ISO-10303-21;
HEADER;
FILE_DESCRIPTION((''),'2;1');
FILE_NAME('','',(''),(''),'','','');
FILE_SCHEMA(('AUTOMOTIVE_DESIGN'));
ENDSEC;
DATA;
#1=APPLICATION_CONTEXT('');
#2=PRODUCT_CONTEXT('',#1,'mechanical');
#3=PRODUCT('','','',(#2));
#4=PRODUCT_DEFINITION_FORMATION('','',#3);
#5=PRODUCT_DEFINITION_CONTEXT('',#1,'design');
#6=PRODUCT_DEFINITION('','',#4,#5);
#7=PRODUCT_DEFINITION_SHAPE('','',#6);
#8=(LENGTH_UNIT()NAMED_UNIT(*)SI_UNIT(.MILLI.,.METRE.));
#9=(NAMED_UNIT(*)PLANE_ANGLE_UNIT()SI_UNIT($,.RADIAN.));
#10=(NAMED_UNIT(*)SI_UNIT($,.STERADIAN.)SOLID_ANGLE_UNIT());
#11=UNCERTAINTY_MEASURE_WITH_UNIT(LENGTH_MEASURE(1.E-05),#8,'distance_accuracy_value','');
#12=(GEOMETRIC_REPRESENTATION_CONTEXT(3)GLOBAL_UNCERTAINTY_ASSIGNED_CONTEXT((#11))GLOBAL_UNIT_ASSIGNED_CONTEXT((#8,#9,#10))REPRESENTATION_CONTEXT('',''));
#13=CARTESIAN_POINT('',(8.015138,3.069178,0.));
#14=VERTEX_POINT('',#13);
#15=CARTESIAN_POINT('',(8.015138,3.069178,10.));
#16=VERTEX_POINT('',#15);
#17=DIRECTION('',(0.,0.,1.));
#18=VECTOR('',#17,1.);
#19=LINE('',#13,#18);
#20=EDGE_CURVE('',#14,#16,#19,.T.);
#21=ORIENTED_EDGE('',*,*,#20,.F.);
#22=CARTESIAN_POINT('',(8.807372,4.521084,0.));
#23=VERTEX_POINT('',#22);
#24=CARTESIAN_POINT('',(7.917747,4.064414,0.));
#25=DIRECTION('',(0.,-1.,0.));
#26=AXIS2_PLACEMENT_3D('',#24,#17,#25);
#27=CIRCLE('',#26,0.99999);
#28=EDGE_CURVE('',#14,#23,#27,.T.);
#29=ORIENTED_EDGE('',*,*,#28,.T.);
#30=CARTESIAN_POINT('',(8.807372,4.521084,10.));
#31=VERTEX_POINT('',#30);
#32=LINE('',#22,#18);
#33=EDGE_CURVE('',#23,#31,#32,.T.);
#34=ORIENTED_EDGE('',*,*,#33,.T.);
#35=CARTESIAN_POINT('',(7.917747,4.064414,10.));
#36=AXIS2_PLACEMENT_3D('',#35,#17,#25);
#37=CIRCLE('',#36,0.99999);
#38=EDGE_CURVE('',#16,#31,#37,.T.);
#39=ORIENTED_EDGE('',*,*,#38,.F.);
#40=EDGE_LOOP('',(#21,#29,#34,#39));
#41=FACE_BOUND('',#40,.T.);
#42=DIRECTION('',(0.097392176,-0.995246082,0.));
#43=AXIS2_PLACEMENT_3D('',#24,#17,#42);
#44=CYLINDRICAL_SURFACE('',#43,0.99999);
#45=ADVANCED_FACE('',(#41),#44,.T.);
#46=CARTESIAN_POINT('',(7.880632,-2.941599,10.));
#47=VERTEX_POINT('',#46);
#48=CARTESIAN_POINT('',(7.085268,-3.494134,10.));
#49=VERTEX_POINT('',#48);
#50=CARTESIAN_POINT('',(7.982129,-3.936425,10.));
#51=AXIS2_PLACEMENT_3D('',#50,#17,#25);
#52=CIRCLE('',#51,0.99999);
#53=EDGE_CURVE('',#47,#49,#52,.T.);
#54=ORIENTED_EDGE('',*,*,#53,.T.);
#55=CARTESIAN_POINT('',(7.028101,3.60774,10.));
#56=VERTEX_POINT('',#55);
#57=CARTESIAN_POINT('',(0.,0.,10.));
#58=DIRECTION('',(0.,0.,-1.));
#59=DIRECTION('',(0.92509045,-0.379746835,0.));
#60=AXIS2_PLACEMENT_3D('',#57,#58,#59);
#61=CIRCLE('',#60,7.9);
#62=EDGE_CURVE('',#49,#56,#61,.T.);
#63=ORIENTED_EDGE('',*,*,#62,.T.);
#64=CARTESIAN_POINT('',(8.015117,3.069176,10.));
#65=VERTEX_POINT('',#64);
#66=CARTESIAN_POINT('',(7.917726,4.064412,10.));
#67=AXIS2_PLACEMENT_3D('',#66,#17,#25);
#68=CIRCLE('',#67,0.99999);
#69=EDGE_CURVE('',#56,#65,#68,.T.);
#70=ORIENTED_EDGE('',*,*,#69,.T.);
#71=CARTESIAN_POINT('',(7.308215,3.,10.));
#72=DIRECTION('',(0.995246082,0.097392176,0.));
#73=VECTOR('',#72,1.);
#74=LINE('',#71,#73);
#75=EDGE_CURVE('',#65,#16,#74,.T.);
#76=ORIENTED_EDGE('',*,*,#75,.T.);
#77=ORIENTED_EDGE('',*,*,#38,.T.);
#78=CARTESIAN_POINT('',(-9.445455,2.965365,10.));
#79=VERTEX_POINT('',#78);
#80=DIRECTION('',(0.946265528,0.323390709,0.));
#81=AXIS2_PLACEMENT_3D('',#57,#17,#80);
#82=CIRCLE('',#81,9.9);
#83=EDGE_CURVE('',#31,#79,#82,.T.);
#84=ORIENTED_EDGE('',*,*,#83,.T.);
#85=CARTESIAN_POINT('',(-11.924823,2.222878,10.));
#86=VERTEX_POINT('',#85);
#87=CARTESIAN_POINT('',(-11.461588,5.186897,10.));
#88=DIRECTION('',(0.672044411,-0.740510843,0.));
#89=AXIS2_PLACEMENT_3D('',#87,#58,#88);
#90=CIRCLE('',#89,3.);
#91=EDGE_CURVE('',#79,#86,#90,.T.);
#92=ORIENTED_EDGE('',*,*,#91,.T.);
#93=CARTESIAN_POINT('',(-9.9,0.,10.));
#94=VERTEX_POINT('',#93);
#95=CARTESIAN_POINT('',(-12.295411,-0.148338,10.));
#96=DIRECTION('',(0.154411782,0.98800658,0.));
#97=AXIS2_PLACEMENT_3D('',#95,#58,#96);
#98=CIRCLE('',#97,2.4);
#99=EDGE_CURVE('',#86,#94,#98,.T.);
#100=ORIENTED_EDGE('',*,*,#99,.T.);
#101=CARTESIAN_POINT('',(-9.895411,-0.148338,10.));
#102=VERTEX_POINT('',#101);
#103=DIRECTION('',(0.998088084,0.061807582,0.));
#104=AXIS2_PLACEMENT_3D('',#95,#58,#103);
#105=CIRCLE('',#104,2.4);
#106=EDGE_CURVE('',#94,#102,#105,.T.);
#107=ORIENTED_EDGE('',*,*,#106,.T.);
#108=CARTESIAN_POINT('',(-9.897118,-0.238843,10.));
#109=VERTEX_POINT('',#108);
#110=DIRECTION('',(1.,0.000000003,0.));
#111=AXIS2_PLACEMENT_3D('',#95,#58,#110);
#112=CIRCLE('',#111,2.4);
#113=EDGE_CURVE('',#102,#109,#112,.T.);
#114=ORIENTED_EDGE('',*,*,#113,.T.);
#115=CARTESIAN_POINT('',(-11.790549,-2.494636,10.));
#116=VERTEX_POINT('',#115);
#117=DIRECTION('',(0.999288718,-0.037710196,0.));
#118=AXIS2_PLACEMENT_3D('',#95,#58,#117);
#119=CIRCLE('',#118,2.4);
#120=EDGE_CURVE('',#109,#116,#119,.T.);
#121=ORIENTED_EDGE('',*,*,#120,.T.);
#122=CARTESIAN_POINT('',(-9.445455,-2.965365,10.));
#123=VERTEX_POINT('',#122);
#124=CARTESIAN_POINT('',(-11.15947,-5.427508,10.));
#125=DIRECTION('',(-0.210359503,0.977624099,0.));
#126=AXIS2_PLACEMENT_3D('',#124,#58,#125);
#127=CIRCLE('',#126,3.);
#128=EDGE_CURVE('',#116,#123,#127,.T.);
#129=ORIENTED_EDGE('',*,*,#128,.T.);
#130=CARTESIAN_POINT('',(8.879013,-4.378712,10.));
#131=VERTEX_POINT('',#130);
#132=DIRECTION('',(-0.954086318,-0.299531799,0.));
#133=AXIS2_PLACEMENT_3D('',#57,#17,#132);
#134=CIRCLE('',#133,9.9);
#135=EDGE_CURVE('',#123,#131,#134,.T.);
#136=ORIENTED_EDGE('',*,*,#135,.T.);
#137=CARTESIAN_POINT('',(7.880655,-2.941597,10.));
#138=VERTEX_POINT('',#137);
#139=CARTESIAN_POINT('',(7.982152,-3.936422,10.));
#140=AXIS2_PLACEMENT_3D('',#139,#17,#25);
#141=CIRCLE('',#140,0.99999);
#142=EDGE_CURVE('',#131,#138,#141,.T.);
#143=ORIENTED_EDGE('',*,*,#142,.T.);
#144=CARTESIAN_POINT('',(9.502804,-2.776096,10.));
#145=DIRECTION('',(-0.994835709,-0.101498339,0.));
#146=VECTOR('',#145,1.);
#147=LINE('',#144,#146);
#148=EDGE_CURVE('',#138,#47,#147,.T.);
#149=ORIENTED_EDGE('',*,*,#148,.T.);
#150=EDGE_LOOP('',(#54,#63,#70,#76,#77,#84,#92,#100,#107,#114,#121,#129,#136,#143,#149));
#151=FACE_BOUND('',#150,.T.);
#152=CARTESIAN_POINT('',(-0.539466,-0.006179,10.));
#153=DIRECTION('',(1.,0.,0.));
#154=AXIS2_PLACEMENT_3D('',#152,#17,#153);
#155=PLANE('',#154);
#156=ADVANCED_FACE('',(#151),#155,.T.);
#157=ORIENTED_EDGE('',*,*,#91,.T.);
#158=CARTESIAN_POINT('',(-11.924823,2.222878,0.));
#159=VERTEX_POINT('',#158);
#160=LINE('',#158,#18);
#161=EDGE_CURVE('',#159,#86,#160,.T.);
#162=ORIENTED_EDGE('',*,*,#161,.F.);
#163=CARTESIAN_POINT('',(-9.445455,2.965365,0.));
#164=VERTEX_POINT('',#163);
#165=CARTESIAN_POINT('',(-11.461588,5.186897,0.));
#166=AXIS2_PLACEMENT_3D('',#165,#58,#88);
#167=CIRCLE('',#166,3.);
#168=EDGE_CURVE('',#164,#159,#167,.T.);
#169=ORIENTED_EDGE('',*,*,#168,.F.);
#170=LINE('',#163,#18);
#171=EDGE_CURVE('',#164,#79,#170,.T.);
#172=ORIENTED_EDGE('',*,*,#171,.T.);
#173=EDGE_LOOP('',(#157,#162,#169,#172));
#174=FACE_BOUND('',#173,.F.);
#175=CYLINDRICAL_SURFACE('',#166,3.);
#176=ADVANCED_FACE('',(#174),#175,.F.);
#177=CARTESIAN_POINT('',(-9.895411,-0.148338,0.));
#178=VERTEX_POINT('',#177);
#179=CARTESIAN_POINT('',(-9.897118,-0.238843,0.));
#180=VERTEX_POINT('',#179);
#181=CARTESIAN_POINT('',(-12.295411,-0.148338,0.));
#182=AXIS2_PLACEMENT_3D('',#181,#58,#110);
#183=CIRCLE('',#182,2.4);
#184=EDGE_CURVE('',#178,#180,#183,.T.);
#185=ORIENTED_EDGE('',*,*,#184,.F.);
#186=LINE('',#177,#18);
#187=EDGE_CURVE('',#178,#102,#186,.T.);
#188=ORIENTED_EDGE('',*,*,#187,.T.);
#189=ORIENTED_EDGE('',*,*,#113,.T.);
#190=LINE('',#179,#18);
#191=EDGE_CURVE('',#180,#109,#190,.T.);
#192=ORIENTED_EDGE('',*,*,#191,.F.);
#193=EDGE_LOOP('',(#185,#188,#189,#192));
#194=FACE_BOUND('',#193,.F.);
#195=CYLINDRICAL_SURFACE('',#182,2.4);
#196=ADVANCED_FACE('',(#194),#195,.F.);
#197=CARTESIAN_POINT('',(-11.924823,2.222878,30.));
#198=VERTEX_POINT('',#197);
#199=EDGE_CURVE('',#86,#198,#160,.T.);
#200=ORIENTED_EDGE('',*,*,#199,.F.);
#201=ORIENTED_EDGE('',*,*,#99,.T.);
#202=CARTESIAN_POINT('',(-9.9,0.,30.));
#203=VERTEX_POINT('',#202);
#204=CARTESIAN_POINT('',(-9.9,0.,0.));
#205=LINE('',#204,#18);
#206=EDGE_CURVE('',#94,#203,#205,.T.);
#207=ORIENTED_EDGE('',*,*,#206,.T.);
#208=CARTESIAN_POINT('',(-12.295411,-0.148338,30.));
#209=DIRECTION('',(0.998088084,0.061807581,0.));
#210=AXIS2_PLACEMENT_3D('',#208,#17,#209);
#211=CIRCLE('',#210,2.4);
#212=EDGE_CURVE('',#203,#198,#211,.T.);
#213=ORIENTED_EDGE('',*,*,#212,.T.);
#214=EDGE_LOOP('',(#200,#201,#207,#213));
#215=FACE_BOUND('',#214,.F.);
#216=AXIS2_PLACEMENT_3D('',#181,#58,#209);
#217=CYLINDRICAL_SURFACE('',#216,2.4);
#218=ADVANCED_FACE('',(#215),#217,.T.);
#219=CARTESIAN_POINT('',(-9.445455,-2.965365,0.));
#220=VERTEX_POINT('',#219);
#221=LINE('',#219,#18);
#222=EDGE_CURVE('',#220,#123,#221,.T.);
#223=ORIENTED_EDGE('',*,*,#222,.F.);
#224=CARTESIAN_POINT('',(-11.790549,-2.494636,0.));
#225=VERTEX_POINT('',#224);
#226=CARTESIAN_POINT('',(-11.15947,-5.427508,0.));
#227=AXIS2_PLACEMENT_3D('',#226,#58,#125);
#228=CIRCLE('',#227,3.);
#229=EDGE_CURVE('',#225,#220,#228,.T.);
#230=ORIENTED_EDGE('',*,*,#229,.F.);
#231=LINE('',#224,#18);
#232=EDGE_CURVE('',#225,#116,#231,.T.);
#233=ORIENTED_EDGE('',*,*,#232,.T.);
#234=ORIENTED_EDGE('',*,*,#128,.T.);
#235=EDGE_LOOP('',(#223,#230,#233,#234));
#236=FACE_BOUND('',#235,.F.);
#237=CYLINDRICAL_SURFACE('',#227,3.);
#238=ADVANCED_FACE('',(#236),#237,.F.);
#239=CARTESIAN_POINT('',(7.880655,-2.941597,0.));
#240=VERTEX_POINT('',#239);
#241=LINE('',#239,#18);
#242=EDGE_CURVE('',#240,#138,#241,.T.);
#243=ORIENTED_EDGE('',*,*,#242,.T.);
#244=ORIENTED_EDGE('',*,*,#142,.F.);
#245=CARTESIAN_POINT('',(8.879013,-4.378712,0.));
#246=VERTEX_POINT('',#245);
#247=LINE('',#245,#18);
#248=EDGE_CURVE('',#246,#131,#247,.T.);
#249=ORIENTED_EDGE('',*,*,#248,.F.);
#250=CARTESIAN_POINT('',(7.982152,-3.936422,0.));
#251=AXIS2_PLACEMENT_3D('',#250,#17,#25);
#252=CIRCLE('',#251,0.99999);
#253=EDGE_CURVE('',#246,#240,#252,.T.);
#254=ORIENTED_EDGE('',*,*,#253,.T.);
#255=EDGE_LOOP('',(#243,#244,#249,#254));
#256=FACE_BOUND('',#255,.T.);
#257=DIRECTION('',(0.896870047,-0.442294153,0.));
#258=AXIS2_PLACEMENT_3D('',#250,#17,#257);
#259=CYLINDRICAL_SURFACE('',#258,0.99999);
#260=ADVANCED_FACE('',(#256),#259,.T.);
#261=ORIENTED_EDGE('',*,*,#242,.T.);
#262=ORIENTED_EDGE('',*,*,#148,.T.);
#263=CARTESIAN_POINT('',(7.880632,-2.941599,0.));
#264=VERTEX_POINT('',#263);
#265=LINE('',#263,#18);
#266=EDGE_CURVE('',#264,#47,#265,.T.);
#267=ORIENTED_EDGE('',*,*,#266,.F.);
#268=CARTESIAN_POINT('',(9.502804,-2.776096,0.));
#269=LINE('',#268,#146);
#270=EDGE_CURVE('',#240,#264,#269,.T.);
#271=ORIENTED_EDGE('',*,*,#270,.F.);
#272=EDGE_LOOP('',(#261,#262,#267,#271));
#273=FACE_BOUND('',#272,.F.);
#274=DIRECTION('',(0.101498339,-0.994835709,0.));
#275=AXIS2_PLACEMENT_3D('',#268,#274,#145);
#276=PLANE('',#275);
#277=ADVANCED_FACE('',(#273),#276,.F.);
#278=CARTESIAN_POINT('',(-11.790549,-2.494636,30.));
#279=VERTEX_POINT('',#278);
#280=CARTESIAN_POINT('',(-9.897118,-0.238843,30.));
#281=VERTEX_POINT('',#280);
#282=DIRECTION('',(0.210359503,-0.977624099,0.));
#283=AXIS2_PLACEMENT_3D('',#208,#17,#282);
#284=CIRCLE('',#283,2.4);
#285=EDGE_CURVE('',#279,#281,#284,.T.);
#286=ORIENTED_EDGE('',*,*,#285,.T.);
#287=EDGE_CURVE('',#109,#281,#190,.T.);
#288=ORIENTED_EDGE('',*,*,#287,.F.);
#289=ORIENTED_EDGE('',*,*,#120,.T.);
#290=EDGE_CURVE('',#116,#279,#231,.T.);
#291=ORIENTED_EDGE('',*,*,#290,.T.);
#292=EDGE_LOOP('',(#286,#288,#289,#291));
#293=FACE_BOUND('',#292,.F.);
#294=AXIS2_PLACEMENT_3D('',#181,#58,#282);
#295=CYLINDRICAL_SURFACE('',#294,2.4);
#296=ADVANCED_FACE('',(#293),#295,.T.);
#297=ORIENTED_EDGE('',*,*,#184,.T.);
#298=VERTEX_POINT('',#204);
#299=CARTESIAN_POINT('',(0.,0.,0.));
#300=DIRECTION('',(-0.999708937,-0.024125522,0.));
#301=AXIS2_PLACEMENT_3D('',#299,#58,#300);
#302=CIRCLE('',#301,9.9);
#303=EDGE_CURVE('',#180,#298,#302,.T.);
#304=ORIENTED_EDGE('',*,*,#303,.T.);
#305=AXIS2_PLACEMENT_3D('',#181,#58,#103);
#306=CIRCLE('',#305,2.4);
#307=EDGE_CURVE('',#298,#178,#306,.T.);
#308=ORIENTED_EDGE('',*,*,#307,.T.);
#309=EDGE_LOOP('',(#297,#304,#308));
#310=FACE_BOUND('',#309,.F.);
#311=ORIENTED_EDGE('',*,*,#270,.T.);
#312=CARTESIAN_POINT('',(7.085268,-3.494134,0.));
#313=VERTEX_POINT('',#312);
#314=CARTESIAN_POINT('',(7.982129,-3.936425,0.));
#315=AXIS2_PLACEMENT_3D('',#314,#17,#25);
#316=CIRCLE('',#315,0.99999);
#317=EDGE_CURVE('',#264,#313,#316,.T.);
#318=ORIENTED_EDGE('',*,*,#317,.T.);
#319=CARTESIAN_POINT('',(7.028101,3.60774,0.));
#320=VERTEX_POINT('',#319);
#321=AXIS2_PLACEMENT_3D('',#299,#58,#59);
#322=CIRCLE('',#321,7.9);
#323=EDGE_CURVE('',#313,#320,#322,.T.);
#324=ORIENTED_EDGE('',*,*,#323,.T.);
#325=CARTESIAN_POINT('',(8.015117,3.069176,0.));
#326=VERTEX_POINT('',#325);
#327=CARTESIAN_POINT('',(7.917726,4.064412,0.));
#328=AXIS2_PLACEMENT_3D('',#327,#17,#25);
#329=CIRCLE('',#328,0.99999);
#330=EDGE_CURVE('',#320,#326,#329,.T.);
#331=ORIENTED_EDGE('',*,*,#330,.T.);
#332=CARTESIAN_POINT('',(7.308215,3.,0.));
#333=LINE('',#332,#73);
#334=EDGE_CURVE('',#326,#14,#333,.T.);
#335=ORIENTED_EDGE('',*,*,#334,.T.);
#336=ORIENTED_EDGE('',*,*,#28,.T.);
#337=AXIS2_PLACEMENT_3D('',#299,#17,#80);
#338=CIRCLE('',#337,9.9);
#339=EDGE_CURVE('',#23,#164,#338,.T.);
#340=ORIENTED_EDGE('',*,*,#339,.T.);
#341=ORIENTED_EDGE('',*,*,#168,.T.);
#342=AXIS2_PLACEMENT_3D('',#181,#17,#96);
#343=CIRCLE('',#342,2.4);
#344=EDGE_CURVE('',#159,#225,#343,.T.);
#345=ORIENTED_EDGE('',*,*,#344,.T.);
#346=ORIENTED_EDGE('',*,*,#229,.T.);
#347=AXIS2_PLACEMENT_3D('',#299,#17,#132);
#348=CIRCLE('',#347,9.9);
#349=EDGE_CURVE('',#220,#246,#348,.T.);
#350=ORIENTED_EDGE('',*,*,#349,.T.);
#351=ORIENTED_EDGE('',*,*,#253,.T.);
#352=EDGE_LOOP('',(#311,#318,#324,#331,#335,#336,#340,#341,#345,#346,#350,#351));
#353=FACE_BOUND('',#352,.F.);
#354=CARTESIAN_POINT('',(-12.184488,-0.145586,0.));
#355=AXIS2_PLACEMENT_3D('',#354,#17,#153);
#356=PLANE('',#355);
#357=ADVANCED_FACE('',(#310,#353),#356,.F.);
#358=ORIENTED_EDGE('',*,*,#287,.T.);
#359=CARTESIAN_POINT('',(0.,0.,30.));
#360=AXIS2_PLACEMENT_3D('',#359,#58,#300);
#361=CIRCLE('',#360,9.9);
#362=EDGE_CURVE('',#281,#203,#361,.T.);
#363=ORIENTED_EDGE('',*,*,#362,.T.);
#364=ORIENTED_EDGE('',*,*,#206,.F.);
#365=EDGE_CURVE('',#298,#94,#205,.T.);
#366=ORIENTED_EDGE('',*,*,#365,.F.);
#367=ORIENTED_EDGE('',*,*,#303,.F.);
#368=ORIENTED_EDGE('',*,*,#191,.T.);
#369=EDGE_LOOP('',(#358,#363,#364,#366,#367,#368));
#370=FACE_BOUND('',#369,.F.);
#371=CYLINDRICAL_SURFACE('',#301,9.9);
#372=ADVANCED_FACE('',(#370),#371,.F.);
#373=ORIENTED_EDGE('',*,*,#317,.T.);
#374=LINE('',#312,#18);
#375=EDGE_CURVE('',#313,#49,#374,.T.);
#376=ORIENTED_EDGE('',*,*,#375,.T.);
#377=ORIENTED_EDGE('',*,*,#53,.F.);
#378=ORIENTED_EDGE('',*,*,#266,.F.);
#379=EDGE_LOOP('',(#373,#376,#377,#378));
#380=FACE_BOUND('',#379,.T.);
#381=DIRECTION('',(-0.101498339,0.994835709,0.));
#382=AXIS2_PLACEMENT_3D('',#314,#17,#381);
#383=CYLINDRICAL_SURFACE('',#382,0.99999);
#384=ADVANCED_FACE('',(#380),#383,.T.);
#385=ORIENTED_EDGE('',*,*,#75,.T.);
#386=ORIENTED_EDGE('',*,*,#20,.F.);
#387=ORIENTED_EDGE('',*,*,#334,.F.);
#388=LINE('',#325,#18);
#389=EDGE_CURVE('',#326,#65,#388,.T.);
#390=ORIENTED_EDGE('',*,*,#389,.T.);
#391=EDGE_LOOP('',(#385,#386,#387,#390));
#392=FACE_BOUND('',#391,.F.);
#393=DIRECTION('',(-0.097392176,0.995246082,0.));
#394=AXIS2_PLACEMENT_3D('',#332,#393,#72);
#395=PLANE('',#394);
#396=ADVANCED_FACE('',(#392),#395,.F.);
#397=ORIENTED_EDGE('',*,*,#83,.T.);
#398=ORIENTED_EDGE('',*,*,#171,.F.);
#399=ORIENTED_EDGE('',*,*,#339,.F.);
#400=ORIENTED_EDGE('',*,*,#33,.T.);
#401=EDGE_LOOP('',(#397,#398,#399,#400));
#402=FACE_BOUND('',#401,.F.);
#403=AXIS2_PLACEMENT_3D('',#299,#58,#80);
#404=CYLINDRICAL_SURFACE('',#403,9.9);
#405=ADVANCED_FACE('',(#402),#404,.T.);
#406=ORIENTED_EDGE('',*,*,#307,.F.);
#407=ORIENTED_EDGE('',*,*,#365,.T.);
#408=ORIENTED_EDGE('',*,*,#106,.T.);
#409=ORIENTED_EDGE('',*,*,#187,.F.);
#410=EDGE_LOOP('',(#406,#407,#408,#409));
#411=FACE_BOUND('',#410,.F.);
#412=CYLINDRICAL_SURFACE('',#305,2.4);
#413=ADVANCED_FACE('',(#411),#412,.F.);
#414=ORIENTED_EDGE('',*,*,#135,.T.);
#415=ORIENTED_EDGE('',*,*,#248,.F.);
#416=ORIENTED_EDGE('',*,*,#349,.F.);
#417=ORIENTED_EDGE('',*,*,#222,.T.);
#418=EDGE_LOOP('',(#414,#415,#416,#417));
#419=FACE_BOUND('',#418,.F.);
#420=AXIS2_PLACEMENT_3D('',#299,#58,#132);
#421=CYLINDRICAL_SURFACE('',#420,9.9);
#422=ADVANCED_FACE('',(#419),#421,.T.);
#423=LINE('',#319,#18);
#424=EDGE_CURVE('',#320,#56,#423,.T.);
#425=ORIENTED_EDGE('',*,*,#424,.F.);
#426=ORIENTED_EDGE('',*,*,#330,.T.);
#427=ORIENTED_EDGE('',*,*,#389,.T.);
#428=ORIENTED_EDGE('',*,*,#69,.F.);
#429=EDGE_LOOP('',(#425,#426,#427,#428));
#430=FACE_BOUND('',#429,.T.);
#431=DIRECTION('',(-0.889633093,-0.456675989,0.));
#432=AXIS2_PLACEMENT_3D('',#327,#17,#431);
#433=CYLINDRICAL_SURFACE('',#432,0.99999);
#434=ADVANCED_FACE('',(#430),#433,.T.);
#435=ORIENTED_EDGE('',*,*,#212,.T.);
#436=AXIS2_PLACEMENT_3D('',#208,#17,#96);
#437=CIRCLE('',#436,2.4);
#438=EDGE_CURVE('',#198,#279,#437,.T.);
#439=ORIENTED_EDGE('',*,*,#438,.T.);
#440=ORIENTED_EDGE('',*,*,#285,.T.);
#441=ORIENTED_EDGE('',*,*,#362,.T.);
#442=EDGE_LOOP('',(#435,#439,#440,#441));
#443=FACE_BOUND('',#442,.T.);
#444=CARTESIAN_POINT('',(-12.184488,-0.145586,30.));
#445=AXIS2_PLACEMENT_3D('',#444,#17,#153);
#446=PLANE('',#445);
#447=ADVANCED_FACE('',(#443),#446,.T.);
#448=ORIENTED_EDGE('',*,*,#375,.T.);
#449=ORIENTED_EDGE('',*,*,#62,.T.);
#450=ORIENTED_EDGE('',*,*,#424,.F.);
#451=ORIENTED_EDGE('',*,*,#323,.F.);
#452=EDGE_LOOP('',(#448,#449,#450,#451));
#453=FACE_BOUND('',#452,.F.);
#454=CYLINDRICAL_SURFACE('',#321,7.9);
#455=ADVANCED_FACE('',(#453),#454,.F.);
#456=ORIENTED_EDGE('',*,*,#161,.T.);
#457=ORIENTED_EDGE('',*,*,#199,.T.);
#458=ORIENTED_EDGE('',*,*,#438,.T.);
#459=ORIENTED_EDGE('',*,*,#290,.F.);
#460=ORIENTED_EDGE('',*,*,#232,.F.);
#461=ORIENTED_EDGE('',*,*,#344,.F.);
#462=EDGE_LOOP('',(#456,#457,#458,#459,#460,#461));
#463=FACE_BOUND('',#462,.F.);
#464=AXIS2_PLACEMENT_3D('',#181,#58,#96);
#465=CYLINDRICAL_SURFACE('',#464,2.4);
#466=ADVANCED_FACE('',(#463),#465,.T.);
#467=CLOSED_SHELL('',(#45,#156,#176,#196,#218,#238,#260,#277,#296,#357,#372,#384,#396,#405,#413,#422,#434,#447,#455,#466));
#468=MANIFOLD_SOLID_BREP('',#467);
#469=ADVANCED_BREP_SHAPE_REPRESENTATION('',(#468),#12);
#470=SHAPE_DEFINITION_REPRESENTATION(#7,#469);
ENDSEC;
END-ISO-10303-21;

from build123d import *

# Parameters (mm, degrees)
F1_DEPTH = 10
F2_DEPTH = 30
F3_R     = 0.99999


# Not quite as in the source:
# - a fillet or chamfer is up to 0.001 mm smaller than in the source, because OpenCascade refuses the exact size


with BuildPart() as f1:
    # F0 (on Top) → F1 (new body)
    with BuildSketch(Plane.XY):
        with BuildLine():
            ThreePointArc((-9.4454545455, 2.9653648055), (-9.7857038582, 1.5), (-9.9, 0))
            ThreePointArc((-9.9, 0), (-9.896558825, -0.0741336209), (-9.895411401, -0.1483381952))
            ThreePointArc((-9.895411401, -0.1483381952), (-9.8958382083, -0.193598479), (-9.8971184787, -0.238842665))
            ThreePointArc((-9.8971184787, -0.238842665), (-9.7668963107, -1.6179420433), (-9.4454545455, -2.9653648055))
            ThreePointArc((-9.4454545455, -2.9653648055), (0.0988831148, -9.8995061558), (9.5028042321, -2.7760964907))
            Line((9.5028042321, -2.7760964907), (7.3082145562, -3))
            ThreePointArc((7.3082145562, -3), (-7.9, 0), (7.3082145562, 3))
            Line((7.3082145562, 3), (9.3680287257, 3.2015680213))
            ThreePointArc((9.3680287257, 3.2015680213), (-0.1242846699, 9.8992198339), (-9.4454545455, 2.9653648055))
        make_face()
        with BuildLine():
            ThreePointArc((-9.4454545455, 2.9653648055), (-10.6009515165, 2.3129966374), (-11.9248231248, 2.2228775962))
            ThreePointArc((-11.9248231248, 2.2228775962), (-10.5211552877, 1.4678348291), (-9.9, 0))
            ThreePointArc((-9.9, 0), (-9.7857038582, 1.5), (-9.4454545455, 2.9653648055))
        make_face()
        with BuildLine():
            ThreePointArc((-9.8971184787, -0.238842665), (-10.4571434039, -1.6913128454), (-11.7905485927, -2.4946360333))
            ThreePointArc((-11.7905485927, -2.4946360333), (-10.5690595937, -2.4861794722), (-9.4454545455, -2.9653648055))
            ThreePointArc((-9.4454545455, -2.9653648055), (-9.7668963107, -1.6179420433), (-9.8971184787, -0.238842665))
        make_face()
    extrude(amount=F1_DEPTH)

    # F0 (on Top) → F2 (join)
    with BuildSketch(Plane.XY):
        with BuildLine():
            ThreePointArc((-9.9, 0), (-10.5211552877, 1.4678348291), (-11.9248231248, 2.2228775962))
            ThreePointArc((-11.9248231248, 2.2228775962), (-14.6944398213, -0.2166217115), (-11.7905485927, -2.4946360333))
            ThreePointArc((-11.7905485927, -2.4946360333), (-10.4571434039, -1.6913128454), (-9.8971184787, -0.238842665))
            ThreePointArc((-9.8971184787, -0.238842665), (-9.8992795935, -0.1194300232), (-9.9, 0))
        make_face()
    extrude(amount=F2_DEPTH)

    # F3 (radius 1 in the source; OpenCascade refuses exactly that, so slightly less here)
    f3_edges = [f1.edges().sort_by_distance(p)[0] for p in [
        (9.502804, -2.776096, 5),
        (7.308215, -3, 5),
        (9.368029, 3.201568, 5),
        (7.308215, 3, 5),
    ]]
    fillet(f3_edges, radius=F3_R)


solid = f1.part
